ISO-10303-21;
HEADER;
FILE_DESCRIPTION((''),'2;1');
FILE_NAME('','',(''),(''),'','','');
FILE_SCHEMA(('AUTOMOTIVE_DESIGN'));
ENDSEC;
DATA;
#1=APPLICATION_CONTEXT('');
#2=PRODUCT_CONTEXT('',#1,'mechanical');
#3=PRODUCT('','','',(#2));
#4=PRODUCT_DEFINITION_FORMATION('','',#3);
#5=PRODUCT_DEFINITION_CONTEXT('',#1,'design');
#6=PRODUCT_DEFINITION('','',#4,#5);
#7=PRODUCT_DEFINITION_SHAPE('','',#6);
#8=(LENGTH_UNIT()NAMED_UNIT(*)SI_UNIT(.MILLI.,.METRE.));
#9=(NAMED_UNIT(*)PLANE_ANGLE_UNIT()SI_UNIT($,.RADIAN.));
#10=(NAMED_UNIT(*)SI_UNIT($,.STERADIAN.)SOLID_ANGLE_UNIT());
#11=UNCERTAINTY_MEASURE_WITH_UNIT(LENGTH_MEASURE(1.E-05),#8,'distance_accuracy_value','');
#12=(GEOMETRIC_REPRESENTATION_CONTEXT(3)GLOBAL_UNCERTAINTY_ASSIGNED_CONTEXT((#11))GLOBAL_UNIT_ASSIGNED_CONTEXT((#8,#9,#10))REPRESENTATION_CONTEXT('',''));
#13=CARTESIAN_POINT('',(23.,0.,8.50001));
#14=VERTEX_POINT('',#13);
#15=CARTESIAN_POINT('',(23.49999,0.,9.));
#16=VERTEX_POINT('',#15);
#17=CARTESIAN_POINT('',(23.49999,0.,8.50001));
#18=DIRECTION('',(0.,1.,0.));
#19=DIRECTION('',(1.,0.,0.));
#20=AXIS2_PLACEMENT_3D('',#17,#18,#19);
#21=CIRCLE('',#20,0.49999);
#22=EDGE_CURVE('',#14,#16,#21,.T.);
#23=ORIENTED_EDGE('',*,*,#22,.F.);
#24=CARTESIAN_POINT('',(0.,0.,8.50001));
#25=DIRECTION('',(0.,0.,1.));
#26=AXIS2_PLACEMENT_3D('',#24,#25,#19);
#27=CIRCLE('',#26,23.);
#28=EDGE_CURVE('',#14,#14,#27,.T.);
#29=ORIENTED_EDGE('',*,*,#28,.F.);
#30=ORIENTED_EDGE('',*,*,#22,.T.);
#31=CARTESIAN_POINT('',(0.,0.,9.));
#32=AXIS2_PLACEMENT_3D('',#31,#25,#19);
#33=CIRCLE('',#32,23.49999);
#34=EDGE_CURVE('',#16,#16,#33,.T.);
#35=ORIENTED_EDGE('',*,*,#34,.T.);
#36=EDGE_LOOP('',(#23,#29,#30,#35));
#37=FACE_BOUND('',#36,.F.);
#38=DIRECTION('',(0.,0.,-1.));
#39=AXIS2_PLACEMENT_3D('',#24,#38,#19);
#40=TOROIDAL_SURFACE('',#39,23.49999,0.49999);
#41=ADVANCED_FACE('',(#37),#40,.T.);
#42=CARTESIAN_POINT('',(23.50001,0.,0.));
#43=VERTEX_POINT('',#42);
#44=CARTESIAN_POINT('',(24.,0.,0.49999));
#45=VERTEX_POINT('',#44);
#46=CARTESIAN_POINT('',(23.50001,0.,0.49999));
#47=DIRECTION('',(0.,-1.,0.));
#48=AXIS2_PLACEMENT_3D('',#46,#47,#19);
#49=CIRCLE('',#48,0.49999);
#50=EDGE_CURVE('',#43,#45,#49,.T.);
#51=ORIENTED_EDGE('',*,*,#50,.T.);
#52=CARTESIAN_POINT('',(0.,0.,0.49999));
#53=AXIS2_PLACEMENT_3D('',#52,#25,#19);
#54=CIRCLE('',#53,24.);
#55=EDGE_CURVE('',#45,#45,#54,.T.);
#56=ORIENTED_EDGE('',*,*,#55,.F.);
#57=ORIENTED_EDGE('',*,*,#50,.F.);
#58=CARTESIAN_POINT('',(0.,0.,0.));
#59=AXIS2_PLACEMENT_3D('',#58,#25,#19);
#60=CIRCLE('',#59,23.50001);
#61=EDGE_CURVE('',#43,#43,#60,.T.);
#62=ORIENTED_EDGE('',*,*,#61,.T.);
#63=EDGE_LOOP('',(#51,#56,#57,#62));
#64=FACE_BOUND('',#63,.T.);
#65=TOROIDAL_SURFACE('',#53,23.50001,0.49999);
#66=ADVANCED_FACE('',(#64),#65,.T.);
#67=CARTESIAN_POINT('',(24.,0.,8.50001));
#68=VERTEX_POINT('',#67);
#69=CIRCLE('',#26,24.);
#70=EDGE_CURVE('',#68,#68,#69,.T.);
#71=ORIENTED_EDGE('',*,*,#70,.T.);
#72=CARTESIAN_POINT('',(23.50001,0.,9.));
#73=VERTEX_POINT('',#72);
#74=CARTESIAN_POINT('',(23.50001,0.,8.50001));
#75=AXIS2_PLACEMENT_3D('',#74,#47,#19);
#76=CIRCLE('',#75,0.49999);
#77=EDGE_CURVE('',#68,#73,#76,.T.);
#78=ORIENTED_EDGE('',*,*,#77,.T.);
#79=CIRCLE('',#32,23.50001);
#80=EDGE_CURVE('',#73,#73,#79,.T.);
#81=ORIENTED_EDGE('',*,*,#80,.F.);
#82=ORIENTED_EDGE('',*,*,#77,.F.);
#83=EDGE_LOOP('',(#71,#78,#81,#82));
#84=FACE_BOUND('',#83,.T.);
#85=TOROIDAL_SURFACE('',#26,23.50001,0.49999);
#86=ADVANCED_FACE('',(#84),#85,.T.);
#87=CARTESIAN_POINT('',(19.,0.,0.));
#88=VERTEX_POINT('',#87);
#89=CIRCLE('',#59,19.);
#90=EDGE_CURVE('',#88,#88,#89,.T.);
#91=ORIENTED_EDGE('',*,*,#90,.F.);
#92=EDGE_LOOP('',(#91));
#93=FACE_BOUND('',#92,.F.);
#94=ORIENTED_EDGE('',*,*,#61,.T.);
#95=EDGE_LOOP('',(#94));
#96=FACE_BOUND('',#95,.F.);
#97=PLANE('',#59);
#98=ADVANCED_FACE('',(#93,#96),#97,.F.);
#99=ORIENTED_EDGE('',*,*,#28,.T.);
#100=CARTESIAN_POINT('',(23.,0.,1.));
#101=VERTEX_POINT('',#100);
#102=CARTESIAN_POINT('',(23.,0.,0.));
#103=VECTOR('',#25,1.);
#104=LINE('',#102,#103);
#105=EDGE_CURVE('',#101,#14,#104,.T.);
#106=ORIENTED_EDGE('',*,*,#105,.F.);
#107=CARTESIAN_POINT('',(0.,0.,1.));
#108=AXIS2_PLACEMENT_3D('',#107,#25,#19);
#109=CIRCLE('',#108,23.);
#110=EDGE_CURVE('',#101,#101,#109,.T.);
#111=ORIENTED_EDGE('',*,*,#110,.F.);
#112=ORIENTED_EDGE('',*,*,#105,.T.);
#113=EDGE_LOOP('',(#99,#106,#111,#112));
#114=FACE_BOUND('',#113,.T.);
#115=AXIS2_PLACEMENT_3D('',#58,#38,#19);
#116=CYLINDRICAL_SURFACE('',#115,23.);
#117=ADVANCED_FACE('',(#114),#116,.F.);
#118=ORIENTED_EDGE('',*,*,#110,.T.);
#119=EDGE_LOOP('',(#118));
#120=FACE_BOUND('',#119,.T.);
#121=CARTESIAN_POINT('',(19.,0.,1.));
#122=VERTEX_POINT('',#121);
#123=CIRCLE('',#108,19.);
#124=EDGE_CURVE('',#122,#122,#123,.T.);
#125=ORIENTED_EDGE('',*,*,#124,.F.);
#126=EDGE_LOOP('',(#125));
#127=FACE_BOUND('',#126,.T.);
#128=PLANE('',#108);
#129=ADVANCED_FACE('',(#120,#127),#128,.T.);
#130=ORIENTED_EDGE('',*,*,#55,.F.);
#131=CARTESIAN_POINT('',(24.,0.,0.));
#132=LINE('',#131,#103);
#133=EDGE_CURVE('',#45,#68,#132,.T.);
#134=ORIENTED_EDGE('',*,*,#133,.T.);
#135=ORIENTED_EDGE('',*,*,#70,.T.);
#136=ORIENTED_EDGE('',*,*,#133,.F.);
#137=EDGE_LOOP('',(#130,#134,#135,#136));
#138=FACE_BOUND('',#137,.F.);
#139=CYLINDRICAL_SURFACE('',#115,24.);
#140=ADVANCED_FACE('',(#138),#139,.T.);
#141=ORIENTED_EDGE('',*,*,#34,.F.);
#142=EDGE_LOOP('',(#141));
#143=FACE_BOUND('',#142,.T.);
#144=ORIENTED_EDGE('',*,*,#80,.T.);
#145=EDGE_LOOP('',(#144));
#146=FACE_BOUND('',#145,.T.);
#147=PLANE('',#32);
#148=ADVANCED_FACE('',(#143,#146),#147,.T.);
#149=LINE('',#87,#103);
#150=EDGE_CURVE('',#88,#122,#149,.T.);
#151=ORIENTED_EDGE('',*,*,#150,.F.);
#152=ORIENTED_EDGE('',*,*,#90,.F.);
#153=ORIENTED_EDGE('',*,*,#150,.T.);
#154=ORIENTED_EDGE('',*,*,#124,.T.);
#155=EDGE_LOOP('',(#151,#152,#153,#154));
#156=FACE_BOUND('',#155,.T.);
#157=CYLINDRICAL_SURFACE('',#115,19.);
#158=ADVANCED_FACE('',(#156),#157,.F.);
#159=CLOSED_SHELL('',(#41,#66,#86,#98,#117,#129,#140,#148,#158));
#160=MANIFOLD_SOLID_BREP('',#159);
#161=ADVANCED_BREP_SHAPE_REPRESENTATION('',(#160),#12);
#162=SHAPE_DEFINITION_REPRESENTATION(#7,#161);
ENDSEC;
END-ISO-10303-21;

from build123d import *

# Parameters (mm, degrees)
F0_R     = 24
F0_R_2   = 23
F1_DEPTH = 9
F0_R_3   = 19
F2_DEPTH = 1
F3_R     = 0.49999


# Not quite as in the source:
# - a fillet or chamfer is up to 0.001 mm smaller than in the source, because OpenCascade refuses the exact size


with BuildPart() as f1:
    # F0 (on Top) → F1 (new body)
    with BuildSketch(Plane.XY):
        Circle(F0_R)
        Circle(F0_R_2, mode=Mode.SUBTRACT)
    extrude(amount=F1_DEPTH)

    # F0 (on Top) → F2 (join)
    with BuildSketch(Plane.XY):
        Circle(F0_R_2)
        Circle(F0_R_3, mode=Mode.SUBTRACT)
    extrude(amount=F2_DEPTH)

    # F3 (radius 0.5 in the source; OpenCascade refuses exactly that, so slightly less here)
    f3_edges = [f1.edges().sort_by_distance(p)[0] for p in [
        (-24, 0, 0),
        (-24, 0, 9),
        (-23, 0, 9),
    ]]
    fillet(f3_edges, radius=F3_R)


solid = f1.part
